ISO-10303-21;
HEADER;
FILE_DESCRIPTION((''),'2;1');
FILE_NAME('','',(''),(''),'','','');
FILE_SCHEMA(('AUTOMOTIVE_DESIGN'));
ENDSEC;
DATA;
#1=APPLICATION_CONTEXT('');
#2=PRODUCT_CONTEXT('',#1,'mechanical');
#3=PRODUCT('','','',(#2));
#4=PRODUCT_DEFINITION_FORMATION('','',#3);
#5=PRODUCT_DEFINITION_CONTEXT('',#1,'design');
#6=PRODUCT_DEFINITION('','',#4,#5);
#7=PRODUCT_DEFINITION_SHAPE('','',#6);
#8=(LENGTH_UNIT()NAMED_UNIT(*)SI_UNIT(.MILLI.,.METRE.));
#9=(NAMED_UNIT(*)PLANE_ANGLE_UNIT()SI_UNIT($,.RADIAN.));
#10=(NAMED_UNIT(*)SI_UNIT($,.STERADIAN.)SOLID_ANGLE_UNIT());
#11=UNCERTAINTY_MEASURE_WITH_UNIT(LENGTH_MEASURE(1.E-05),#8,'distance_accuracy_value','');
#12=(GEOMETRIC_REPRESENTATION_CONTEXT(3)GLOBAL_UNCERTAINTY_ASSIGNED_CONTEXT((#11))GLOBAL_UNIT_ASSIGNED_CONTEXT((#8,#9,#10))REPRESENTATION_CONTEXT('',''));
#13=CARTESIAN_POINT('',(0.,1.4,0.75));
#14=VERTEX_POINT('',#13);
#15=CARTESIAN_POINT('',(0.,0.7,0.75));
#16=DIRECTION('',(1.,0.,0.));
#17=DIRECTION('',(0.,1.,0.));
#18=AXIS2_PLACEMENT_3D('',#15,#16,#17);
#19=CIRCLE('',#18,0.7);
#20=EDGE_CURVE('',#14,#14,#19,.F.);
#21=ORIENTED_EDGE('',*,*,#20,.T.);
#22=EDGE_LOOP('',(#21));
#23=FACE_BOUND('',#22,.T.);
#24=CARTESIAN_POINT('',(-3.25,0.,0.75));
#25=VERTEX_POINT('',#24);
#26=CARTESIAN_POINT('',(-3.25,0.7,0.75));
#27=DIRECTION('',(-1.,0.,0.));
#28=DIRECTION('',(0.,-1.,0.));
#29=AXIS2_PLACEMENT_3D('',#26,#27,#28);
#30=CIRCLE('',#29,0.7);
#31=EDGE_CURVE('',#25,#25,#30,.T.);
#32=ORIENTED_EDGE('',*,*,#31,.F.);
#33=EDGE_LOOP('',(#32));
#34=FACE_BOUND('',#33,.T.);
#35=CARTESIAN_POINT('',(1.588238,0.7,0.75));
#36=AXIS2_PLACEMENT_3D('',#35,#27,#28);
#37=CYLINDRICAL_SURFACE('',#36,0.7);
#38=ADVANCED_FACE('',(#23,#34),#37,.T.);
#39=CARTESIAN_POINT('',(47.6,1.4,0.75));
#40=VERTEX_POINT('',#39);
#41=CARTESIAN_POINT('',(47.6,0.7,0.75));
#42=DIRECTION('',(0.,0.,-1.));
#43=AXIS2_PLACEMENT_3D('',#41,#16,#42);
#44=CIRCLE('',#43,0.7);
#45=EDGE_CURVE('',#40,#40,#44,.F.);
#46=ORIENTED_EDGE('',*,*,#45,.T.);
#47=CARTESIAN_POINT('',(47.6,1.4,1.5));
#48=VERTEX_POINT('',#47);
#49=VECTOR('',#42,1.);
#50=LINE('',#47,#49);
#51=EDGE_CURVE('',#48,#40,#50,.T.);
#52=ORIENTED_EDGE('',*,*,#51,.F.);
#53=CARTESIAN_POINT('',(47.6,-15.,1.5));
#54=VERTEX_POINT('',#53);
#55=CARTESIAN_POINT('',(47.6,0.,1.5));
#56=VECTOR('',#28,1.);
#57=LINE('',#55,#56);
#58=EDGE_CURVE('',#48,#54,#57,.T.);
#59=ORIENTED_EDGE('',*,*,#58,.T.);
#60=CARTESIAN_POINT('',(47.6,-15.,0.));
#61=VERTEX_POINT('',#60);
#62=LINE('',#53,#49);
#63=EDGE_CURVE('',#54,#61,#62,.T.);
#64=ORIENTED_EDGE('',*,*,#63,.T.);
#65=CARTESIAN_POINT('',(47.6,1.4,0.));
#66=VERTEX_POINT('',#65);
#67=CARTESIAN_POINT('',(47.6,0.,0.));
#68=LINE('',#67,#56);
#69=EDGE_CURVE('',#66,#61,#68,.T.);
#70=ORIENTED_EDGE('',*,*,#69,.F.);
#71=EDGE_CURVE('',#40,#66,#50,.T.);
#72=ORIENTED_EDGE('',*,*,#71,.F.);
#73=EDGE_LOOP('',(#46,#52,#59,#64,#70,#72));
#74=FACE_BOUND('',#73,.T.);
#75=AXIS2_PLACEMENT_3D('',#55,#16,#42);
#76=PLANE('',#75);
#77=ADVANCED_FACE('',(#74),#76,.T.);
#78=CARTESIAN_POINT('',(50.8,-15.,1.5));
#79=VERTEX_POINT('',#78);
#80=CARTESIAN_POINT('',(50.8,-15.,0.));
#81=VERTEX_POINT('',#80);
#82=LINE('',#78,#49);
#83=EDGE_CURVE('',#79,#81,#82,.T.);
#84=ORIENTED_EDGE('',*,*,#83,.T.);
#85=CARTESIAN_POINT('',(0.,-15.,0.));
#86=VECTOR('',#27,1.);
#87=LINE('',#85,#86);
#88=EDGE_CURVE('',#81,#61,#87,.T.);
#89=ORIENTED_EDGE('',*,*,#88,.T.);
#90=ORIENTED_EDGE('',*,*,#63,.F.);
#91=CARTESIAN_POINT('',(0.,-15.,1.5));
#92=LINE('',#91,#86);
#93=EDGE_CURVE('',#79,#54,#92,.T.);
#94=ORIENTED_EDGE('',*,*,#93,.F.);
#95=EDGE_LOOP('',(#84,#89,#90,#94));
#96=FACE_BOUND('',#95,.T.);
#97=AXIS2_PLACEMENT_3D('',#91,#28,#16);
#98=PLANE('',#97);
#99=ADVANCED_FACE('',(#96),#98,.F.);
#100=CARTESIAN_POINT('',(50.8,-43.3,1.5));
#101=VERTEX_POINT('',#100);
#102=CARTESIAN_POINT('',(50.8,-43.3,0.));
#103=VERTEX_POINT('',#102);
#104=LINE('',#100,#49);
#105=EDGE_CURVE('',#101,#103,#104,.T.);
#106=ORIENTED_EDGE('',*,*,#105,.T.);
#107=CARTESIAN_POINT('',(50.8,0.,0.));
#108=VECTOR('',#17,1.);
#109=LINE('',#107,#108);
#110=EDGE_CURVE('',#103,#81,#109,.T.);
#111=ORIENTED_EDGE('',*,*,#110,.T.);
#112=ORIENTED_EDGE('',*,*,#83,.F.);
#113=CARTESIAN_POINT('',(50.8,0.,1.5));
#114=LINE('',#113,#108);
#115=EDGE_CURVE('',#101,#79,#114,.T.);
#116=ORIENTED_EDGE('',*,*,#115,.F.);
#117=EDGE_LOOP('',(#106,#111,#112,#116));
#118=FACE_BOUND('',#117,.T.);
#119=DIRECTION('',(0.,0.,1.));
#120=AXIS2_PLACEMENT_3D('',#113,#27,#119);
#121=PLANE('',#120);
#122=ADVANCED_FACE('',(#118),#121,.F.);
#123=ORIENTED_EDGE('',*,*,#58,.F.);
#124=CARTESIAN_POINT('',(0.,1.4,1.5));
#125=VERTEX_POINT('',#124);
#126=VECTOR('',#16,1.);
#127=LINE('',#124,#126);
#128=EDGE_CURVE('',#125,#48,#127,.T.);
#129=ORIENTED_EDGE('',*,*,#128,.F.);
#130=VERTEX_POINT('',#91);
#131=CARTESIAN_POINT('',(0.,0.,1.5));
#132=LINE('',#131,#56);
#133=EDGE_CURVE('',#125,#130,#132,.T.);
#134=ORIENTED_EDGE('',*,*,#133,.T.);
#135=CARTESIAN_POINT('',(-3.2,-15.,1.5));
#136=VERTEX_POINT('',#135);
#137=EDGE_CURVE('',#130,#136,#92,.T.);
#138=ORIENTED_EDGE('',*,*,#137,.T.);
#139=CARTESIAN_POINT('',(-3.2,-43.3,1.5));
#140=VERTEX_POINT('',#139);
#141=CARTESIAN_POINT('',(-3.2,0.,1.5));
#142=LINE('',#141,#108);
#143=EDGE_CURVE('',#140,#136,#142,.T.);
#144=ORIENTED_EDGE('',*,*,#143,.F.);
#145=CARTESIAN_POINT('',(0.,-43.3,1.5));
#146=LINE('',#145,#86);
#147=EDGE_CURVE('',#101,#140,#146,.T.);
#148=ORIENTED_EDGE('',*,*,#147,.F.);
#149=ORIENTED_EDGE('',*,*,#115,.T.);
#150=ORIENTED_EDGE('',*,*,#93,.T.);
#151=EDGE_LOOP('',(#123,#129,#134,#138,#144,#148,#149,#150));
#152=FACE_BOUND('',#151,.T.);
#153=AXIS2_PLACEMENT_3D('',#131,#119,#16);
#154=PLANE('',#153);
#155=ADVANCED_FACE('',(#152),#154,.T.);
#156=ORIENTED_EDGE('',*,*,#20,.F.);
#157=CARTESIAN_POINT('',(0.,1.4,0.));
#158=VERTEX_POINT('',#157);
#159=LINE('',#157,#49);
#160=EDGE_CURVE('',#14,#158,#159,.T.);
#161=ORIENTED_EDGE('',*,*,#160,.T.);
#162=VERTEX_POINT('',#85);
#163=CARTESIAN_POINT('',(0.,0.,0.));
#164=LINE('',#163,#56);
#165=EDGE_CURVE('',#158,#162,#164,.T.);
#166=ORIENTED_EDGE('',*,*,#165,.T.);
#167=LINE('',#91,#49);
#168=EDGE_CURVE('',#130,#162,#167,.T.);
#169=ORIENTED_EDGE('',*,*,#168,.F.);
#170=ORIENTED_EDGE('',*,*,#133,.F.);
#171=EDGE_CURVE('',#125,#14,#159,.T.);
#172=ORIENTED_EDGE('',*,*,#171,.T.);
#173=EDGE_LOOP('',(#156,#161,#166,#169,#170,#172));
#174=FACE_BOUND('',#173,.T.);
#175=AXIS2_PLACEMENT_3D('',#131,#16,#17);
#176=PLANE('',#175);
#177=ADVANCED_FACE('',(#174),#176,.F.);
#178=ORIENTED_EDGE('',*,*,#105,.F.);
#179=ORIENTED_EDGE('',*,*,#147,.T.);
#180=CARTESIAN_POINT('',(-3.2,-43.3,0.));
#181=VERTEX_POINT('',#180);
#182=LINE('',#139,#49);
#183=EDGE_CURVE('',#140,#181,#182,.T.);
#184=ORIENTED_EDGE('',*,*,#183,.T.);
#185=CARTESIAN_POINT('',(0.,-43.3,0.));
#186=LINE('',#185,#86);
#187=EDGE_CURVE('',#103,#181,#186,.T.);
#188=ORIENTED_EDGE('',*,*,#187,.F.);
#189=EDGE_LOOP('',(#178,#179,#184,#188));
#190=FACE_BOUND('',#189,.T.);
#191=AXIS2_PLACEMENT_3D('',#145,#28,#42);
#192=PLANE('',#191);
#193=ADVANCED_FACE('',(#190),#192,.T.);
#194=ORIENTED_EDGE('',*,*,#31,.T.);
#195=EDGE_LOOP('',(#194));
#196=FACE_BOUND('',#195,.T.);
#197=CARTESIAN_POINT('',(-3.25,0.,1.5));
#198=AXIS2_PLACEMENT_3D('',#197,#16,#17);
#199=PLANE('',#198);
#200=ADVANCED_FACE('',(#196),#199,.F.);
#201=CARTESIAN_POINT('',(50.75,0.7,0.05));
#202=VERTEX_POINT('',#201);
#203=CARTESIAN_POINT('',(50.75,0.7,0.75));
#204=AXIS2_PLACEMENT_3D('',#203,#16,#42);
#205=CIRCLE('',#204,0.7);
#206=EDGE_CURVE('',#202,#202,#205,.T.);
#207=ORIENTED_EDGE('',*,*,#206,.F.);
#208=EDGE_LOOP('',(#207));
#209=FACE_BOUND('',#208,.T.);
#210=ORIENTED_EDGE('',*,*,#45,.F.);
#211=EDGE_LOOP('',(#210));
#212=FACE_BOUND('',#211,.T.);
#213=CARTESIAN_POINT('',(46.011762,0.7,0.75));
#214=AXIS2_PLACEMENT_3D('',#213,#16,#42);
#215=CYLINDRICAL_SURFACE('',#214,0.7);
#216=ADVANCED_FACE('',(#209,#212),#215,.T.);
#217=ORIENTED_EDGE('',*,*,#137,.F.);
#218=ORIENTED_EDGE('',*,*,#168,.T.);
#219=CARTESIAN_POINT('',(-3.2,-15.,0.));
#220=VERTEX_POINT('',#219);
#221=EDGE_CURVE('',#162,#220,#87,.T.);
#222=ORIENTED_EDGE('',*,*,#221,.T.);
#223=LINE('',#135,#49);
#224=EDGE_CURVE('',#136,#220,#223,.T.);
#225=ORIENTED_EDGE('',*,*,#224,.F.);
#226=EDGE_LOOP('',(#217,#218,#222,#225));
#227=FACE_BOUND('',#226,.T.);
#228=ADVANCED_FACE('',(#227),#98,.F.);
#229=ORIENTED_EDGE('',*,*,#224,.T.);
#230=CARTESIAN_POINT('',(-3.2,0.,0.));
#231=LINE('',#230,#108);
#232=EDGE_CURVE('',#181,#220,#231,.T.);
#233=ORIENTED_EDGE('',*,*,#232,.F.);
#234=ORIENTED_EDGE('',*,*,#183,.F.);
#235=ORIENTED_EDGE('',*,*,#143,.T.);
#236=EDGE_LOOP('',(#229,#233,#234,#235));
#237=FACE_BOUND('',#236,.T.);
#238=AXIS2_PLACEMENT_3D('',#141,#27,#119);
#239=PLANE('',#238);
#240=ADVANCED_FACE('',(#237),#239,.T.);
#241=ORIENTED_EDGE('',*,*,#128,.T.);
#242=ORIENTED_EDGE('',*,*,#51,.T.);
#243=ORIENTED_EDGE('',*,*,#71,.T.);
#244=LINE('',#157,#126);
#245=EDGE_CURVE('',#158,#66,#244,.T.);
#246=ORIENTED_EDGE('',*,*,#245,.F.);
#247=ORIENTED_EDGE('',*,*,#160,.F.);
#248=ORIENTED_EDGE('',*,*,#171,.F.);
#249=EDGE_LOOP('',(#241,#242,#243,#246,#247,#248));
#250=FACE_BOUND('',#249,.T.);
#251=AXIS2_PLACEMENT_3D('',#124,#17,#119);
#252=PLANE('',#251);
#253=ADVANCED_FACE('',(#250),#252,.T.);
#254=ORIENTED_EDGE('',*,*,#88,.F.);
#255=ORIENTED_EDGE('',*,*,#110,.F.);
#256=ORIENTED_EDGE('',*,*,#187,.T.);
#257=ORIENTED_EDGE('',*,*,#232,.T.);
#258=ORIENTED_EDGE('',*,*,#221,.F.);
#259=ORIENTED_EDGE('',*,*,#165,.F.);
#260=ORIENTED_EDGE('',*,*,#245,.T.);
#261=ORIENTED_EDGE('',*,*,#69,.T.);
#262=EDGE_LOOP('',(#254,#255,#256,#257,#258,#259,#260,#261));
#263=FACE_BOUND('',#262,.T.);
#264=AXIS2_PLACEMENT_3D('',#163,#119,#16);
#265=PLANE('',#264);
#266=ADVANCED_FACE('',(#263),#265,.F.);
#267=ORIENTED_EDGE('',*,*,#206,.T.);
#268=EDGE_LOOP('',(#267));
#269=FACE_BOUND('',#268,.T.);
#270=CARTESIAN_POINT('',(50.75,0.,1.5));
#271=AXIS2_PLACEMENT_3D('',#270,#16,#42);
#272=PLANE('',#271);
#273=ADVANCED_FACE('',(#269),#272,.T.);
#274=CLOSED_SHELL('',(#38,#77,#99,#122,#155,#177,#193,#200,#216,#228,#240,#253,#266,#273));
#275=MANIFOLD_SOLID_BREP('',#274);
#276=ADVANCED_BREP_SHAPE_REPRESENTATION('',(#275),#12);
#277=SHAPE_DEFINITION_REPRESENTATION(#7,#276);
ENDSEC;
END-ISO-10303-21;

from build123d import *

# Parameters (mm, degrees)
BOSS_EXTRUDE1_DEPTH = 1.5
CUT_EXTRUDE5_START  = -3.25
CUT_EXTRUDE5_DEPTH  = 3.25
CUT_EXTRUDE6_START  = -54
CUT_EXTRUDE6_DEPTH  = 3.15


# Read off the part's stored shape, not the designer's step: Cut-Extrude6
with BuildPart() as part:
    # Sketch1 → Boss-Extrude1 (new body)
    with BuildSketch(Plane.XY):
        Polygon((47.6, -15), (47.6, 0), (50.75, 0), (50.75, 1.4), (42.5, 1.4), (5.1, 1.4), (-3.25, 1.4), (-3.25, 0), (0, 0), (0, -15), (-3.2, -15), (-3.2, -43.3), (50.8, -43.3), (50.8, -15), align=None)
    extrude(amount=BOSS_EXTRUDE1_DEPTH)

    # Sketch3 → Cut-Extrude5 (cut)
    with BuildSketch(Plane.ZY.offset(3.25).offset(CUT_EXTRUDE5_START)):
        with BuildLine():
            Line((0.75, 1.4), (0, 1.4))
            Line((0, 1.4), (0, 0))
            Line((0, 0), (0.75, 0))
            ThreePointArc((0.75, 0), (0.05, 0.7), (0.75, 1.4))
        make_face()
        with BuildLine():
            Line((1.5, 1.4), (0.75, 1.4))
            ThreePointArc((0.75, 1.4), (1.45, 0.7), (0.75, 0))
            Line((0.75, 0), (1.5, 0))
            Line((1.5, 0), (1.5, 1.4))
        make_face()
    extrude(amount=CUT_EXTRUDE5_DEPTH, mode=Mode.SUBTRACT)

    # Cut-Extrude6 outline → Cut-Extrude6 (cut)
    with BuildSketch(Plane.ZY.offset(3.25).offset(CUT_EXTRUDE6_START)):
        with BuildLine():
            ThreePointArc((0.75, 1.4), (1.45, 0.7), (0.75, 0))
            Line((0.75, 0), (1.5, 0))
            Line((1.5, 0), (1.5, 1.4))
            Line((1.5, 1.4), (0.75, 1.4))
        make_face()
        with BuildLine():
            ThreePointArc((0.75, 0), (0.05, 0.7), (0.75, 1.4))
            Line((0.75, 1.4), (0, 1.4))
            Line((0, 1.4), (0, 0))
            Line((0, 0), (0.75, 0))
        make_face()
    extrude(amount=CUT_EXTRUDE6_DEPTH, mode=Mode.SUBTRACT)


solid = part.part
